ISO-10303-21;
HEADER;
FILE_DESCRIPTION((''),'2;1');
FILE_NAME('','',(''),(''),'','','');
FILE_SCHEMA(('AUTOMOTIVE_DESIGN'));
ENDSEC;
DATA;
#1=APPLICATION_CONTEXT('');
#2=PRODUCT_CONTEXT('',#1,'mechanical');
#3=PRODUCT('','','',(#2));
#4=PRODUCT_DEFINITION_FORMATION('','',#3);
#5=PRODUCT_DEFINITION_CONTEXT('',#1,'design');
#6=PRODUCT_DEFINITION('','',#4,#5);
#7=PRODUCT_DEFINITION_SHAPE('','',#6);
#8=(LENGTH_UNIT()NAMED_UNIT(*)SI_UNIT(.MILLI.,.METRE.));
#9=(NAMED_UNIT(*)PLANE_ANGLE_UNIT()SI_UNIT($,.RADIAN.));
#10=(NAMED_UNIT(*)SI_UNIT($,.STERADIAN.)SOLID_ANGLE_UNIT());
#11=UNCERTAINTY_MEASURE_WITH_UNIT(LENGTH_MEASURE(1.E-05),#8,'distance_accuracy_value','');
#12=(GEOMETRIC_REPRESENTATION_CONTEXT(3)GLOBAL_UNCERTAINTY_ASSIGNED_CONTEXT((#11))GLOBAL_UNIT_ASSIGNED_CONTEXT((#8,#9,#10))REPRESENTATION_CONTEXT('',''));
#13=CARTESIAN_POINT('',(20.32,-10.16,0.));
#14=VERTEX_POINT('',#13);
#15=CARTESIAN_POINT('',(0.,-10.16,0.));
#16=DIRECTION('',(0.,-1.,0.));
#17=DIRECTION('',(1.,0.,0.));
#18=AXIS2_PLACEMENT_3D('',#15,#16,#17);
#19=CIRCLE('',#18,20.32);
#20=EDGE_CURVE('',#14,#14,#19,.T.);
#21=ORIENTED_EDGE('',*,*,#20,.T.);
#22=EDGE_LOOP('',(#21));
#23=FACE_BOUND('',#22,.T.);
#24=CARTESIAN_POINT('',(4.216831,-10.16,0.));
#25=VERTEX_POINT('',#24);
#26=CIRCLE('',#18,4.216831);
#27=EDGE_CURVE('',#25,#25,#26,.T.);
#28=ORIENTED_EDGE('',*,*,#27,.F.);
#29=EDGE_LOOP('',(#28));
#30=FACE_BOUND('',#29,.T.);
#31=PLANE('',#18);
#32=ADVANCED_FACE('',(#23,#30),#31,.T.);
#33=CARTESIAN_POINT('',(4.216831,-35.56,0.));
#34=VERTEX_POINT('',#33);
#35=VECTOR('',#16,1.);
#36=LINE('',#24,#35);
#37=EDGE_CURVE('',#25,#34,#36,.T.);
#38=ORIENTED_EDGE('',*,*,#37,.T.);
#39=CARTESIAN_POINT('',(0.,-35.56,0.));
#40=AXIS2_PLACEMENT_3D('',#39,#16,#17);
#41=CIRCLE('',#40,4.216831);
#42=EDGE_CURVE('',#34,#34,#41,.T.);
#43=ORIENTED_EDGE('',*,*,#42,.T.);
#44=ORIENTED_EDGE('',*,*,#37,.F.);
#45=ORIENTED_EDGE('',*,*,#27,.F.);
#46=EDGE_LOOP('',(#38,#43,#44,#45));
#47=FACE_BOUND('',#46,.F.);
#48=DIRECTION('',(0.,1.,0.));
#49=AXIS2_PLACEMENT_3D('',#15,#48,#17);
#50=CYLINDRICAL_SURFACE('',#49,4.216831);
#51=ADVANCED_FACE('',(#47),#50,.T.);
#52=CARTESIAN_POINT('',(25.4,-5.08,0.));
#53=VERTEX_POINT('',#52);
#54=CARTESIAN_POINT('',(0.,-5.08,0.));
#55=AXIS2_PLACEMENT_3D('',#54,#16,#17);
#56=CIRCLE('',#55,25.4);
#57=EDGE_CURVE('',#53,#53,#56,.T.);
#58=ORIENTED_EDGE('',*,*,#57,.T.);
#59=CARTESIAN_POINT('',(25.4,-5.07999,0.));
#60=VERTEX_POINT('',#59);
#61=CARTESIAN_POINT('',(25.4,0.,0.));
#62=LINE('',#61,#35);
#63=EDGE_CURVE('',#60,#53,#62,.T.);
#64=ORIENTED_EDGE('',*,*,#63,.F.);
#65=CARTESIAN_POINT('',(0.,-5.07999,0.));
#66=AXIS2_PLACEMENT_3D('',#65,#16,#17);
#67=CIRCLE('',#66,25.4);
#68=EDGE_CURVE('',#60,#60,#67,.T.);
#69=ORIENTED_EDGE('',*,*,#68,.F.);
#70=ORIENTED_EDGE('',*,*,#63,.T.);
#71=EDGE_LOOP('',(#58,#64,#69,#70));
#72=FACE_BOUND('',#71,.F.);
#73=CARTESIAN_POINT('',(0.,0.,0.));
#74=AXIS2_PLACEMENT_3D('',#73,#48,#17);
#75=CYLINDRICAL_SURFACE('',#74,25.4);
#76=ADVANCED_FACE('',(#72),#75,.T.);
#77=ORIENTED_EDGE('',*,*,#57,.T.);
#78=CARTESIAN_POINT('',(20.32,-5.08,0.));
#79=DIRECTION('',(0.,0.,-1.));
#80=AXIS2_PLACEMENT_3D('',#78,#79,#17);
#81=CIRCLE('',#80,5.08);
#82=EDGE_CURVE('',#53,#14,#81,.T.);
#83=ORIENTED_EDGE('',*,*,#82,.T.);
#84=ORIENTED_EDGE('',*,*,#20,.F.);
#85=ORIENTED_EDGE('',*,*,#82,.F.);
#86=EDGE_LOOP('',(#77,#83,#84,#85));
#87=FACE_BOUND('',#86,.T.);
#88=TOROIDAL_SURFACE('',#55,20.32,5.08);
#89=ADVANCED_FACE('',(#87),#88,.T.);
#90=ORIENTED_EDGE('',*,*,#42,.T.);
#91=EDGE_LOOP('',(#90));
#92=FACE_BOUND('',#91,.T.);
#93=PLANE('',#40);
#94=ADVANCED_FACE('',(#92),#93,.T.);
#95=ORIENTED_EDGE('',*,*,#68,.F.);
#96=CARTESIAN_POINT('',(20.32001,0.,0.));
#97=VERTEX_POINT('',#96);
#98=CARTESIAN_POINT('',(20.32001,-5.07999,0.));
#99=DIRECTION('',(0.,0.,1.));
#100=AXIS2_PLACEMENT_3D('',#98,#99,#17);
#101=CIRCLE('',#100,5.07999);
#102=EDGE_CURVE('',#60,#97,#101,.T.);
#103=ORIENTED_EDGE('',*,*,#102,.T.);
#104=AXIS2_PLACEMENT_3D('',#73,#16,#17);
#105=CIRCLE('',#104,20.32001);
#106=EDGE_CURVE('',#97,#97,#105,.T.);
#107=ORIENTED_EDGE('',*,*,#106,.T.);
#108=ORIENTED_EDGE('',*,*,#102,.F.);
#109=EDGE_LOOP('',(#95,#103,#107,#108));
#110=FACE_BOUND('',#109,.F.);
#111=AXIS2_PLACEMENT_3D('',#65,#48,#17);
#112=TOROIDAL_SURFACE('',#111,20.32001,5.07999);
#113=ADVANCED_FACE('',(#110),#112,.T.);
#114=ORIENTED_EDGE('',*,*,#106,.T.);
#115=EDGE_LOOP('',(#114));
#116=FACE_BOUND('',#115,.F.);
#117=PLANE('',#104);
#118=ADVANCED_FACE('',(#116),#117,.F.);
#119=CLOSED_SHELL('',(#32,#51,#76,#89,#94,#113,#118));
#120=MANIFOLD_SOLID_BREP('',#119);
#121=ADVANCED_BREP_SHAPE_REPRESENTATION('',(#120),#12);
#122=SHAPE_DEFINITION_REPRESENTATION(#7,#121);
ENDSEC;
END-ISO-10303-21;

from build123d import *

# Parameters (mm, degrees)
F0_R     = 25.4
F1_DEPTH = 10.16
F2_R     = 5.08
F3_R     = 5.07999
F4_R     = 4.2168312207
F5_DEPTH = 25.4


# Not quite as in the source:
# - a fillet or chamfer is up to 0.001 mm smaller than in the source, because OpenCascade refuses the exact size


with BuildPart() as f1:
    # F0 (on Front) → F1 (new body)
    with BuildSketch(Plane.XZ):
        Circle(F0_R)
    extrude(amount=F1_DEPTH)

    # F2
    f2_edges = [f1.edges().sort_by_distance(p)[0] for p in [
        (-25.4, -10.16, 0),
    ]]
    fillet(f2_edges, radius=F2_R)

    # F3 (radius 5.08 in the source; OpenCascade refuses exactly that, so slightly less here)
    f3_edges = [f1.edges().sort_by_distance(p)[0] for p in [
        (-25.4, 0, 0),
    ]]
    fillet(f3_edges, radius=F3_R)

    # F4 (on face) → F5 (join)
    with BuildSketch(Plane.XZ.offset(10.16)):
        Circle(F4_R)
    extrude(amount=F5_DEPTH)


solid = f1.part
